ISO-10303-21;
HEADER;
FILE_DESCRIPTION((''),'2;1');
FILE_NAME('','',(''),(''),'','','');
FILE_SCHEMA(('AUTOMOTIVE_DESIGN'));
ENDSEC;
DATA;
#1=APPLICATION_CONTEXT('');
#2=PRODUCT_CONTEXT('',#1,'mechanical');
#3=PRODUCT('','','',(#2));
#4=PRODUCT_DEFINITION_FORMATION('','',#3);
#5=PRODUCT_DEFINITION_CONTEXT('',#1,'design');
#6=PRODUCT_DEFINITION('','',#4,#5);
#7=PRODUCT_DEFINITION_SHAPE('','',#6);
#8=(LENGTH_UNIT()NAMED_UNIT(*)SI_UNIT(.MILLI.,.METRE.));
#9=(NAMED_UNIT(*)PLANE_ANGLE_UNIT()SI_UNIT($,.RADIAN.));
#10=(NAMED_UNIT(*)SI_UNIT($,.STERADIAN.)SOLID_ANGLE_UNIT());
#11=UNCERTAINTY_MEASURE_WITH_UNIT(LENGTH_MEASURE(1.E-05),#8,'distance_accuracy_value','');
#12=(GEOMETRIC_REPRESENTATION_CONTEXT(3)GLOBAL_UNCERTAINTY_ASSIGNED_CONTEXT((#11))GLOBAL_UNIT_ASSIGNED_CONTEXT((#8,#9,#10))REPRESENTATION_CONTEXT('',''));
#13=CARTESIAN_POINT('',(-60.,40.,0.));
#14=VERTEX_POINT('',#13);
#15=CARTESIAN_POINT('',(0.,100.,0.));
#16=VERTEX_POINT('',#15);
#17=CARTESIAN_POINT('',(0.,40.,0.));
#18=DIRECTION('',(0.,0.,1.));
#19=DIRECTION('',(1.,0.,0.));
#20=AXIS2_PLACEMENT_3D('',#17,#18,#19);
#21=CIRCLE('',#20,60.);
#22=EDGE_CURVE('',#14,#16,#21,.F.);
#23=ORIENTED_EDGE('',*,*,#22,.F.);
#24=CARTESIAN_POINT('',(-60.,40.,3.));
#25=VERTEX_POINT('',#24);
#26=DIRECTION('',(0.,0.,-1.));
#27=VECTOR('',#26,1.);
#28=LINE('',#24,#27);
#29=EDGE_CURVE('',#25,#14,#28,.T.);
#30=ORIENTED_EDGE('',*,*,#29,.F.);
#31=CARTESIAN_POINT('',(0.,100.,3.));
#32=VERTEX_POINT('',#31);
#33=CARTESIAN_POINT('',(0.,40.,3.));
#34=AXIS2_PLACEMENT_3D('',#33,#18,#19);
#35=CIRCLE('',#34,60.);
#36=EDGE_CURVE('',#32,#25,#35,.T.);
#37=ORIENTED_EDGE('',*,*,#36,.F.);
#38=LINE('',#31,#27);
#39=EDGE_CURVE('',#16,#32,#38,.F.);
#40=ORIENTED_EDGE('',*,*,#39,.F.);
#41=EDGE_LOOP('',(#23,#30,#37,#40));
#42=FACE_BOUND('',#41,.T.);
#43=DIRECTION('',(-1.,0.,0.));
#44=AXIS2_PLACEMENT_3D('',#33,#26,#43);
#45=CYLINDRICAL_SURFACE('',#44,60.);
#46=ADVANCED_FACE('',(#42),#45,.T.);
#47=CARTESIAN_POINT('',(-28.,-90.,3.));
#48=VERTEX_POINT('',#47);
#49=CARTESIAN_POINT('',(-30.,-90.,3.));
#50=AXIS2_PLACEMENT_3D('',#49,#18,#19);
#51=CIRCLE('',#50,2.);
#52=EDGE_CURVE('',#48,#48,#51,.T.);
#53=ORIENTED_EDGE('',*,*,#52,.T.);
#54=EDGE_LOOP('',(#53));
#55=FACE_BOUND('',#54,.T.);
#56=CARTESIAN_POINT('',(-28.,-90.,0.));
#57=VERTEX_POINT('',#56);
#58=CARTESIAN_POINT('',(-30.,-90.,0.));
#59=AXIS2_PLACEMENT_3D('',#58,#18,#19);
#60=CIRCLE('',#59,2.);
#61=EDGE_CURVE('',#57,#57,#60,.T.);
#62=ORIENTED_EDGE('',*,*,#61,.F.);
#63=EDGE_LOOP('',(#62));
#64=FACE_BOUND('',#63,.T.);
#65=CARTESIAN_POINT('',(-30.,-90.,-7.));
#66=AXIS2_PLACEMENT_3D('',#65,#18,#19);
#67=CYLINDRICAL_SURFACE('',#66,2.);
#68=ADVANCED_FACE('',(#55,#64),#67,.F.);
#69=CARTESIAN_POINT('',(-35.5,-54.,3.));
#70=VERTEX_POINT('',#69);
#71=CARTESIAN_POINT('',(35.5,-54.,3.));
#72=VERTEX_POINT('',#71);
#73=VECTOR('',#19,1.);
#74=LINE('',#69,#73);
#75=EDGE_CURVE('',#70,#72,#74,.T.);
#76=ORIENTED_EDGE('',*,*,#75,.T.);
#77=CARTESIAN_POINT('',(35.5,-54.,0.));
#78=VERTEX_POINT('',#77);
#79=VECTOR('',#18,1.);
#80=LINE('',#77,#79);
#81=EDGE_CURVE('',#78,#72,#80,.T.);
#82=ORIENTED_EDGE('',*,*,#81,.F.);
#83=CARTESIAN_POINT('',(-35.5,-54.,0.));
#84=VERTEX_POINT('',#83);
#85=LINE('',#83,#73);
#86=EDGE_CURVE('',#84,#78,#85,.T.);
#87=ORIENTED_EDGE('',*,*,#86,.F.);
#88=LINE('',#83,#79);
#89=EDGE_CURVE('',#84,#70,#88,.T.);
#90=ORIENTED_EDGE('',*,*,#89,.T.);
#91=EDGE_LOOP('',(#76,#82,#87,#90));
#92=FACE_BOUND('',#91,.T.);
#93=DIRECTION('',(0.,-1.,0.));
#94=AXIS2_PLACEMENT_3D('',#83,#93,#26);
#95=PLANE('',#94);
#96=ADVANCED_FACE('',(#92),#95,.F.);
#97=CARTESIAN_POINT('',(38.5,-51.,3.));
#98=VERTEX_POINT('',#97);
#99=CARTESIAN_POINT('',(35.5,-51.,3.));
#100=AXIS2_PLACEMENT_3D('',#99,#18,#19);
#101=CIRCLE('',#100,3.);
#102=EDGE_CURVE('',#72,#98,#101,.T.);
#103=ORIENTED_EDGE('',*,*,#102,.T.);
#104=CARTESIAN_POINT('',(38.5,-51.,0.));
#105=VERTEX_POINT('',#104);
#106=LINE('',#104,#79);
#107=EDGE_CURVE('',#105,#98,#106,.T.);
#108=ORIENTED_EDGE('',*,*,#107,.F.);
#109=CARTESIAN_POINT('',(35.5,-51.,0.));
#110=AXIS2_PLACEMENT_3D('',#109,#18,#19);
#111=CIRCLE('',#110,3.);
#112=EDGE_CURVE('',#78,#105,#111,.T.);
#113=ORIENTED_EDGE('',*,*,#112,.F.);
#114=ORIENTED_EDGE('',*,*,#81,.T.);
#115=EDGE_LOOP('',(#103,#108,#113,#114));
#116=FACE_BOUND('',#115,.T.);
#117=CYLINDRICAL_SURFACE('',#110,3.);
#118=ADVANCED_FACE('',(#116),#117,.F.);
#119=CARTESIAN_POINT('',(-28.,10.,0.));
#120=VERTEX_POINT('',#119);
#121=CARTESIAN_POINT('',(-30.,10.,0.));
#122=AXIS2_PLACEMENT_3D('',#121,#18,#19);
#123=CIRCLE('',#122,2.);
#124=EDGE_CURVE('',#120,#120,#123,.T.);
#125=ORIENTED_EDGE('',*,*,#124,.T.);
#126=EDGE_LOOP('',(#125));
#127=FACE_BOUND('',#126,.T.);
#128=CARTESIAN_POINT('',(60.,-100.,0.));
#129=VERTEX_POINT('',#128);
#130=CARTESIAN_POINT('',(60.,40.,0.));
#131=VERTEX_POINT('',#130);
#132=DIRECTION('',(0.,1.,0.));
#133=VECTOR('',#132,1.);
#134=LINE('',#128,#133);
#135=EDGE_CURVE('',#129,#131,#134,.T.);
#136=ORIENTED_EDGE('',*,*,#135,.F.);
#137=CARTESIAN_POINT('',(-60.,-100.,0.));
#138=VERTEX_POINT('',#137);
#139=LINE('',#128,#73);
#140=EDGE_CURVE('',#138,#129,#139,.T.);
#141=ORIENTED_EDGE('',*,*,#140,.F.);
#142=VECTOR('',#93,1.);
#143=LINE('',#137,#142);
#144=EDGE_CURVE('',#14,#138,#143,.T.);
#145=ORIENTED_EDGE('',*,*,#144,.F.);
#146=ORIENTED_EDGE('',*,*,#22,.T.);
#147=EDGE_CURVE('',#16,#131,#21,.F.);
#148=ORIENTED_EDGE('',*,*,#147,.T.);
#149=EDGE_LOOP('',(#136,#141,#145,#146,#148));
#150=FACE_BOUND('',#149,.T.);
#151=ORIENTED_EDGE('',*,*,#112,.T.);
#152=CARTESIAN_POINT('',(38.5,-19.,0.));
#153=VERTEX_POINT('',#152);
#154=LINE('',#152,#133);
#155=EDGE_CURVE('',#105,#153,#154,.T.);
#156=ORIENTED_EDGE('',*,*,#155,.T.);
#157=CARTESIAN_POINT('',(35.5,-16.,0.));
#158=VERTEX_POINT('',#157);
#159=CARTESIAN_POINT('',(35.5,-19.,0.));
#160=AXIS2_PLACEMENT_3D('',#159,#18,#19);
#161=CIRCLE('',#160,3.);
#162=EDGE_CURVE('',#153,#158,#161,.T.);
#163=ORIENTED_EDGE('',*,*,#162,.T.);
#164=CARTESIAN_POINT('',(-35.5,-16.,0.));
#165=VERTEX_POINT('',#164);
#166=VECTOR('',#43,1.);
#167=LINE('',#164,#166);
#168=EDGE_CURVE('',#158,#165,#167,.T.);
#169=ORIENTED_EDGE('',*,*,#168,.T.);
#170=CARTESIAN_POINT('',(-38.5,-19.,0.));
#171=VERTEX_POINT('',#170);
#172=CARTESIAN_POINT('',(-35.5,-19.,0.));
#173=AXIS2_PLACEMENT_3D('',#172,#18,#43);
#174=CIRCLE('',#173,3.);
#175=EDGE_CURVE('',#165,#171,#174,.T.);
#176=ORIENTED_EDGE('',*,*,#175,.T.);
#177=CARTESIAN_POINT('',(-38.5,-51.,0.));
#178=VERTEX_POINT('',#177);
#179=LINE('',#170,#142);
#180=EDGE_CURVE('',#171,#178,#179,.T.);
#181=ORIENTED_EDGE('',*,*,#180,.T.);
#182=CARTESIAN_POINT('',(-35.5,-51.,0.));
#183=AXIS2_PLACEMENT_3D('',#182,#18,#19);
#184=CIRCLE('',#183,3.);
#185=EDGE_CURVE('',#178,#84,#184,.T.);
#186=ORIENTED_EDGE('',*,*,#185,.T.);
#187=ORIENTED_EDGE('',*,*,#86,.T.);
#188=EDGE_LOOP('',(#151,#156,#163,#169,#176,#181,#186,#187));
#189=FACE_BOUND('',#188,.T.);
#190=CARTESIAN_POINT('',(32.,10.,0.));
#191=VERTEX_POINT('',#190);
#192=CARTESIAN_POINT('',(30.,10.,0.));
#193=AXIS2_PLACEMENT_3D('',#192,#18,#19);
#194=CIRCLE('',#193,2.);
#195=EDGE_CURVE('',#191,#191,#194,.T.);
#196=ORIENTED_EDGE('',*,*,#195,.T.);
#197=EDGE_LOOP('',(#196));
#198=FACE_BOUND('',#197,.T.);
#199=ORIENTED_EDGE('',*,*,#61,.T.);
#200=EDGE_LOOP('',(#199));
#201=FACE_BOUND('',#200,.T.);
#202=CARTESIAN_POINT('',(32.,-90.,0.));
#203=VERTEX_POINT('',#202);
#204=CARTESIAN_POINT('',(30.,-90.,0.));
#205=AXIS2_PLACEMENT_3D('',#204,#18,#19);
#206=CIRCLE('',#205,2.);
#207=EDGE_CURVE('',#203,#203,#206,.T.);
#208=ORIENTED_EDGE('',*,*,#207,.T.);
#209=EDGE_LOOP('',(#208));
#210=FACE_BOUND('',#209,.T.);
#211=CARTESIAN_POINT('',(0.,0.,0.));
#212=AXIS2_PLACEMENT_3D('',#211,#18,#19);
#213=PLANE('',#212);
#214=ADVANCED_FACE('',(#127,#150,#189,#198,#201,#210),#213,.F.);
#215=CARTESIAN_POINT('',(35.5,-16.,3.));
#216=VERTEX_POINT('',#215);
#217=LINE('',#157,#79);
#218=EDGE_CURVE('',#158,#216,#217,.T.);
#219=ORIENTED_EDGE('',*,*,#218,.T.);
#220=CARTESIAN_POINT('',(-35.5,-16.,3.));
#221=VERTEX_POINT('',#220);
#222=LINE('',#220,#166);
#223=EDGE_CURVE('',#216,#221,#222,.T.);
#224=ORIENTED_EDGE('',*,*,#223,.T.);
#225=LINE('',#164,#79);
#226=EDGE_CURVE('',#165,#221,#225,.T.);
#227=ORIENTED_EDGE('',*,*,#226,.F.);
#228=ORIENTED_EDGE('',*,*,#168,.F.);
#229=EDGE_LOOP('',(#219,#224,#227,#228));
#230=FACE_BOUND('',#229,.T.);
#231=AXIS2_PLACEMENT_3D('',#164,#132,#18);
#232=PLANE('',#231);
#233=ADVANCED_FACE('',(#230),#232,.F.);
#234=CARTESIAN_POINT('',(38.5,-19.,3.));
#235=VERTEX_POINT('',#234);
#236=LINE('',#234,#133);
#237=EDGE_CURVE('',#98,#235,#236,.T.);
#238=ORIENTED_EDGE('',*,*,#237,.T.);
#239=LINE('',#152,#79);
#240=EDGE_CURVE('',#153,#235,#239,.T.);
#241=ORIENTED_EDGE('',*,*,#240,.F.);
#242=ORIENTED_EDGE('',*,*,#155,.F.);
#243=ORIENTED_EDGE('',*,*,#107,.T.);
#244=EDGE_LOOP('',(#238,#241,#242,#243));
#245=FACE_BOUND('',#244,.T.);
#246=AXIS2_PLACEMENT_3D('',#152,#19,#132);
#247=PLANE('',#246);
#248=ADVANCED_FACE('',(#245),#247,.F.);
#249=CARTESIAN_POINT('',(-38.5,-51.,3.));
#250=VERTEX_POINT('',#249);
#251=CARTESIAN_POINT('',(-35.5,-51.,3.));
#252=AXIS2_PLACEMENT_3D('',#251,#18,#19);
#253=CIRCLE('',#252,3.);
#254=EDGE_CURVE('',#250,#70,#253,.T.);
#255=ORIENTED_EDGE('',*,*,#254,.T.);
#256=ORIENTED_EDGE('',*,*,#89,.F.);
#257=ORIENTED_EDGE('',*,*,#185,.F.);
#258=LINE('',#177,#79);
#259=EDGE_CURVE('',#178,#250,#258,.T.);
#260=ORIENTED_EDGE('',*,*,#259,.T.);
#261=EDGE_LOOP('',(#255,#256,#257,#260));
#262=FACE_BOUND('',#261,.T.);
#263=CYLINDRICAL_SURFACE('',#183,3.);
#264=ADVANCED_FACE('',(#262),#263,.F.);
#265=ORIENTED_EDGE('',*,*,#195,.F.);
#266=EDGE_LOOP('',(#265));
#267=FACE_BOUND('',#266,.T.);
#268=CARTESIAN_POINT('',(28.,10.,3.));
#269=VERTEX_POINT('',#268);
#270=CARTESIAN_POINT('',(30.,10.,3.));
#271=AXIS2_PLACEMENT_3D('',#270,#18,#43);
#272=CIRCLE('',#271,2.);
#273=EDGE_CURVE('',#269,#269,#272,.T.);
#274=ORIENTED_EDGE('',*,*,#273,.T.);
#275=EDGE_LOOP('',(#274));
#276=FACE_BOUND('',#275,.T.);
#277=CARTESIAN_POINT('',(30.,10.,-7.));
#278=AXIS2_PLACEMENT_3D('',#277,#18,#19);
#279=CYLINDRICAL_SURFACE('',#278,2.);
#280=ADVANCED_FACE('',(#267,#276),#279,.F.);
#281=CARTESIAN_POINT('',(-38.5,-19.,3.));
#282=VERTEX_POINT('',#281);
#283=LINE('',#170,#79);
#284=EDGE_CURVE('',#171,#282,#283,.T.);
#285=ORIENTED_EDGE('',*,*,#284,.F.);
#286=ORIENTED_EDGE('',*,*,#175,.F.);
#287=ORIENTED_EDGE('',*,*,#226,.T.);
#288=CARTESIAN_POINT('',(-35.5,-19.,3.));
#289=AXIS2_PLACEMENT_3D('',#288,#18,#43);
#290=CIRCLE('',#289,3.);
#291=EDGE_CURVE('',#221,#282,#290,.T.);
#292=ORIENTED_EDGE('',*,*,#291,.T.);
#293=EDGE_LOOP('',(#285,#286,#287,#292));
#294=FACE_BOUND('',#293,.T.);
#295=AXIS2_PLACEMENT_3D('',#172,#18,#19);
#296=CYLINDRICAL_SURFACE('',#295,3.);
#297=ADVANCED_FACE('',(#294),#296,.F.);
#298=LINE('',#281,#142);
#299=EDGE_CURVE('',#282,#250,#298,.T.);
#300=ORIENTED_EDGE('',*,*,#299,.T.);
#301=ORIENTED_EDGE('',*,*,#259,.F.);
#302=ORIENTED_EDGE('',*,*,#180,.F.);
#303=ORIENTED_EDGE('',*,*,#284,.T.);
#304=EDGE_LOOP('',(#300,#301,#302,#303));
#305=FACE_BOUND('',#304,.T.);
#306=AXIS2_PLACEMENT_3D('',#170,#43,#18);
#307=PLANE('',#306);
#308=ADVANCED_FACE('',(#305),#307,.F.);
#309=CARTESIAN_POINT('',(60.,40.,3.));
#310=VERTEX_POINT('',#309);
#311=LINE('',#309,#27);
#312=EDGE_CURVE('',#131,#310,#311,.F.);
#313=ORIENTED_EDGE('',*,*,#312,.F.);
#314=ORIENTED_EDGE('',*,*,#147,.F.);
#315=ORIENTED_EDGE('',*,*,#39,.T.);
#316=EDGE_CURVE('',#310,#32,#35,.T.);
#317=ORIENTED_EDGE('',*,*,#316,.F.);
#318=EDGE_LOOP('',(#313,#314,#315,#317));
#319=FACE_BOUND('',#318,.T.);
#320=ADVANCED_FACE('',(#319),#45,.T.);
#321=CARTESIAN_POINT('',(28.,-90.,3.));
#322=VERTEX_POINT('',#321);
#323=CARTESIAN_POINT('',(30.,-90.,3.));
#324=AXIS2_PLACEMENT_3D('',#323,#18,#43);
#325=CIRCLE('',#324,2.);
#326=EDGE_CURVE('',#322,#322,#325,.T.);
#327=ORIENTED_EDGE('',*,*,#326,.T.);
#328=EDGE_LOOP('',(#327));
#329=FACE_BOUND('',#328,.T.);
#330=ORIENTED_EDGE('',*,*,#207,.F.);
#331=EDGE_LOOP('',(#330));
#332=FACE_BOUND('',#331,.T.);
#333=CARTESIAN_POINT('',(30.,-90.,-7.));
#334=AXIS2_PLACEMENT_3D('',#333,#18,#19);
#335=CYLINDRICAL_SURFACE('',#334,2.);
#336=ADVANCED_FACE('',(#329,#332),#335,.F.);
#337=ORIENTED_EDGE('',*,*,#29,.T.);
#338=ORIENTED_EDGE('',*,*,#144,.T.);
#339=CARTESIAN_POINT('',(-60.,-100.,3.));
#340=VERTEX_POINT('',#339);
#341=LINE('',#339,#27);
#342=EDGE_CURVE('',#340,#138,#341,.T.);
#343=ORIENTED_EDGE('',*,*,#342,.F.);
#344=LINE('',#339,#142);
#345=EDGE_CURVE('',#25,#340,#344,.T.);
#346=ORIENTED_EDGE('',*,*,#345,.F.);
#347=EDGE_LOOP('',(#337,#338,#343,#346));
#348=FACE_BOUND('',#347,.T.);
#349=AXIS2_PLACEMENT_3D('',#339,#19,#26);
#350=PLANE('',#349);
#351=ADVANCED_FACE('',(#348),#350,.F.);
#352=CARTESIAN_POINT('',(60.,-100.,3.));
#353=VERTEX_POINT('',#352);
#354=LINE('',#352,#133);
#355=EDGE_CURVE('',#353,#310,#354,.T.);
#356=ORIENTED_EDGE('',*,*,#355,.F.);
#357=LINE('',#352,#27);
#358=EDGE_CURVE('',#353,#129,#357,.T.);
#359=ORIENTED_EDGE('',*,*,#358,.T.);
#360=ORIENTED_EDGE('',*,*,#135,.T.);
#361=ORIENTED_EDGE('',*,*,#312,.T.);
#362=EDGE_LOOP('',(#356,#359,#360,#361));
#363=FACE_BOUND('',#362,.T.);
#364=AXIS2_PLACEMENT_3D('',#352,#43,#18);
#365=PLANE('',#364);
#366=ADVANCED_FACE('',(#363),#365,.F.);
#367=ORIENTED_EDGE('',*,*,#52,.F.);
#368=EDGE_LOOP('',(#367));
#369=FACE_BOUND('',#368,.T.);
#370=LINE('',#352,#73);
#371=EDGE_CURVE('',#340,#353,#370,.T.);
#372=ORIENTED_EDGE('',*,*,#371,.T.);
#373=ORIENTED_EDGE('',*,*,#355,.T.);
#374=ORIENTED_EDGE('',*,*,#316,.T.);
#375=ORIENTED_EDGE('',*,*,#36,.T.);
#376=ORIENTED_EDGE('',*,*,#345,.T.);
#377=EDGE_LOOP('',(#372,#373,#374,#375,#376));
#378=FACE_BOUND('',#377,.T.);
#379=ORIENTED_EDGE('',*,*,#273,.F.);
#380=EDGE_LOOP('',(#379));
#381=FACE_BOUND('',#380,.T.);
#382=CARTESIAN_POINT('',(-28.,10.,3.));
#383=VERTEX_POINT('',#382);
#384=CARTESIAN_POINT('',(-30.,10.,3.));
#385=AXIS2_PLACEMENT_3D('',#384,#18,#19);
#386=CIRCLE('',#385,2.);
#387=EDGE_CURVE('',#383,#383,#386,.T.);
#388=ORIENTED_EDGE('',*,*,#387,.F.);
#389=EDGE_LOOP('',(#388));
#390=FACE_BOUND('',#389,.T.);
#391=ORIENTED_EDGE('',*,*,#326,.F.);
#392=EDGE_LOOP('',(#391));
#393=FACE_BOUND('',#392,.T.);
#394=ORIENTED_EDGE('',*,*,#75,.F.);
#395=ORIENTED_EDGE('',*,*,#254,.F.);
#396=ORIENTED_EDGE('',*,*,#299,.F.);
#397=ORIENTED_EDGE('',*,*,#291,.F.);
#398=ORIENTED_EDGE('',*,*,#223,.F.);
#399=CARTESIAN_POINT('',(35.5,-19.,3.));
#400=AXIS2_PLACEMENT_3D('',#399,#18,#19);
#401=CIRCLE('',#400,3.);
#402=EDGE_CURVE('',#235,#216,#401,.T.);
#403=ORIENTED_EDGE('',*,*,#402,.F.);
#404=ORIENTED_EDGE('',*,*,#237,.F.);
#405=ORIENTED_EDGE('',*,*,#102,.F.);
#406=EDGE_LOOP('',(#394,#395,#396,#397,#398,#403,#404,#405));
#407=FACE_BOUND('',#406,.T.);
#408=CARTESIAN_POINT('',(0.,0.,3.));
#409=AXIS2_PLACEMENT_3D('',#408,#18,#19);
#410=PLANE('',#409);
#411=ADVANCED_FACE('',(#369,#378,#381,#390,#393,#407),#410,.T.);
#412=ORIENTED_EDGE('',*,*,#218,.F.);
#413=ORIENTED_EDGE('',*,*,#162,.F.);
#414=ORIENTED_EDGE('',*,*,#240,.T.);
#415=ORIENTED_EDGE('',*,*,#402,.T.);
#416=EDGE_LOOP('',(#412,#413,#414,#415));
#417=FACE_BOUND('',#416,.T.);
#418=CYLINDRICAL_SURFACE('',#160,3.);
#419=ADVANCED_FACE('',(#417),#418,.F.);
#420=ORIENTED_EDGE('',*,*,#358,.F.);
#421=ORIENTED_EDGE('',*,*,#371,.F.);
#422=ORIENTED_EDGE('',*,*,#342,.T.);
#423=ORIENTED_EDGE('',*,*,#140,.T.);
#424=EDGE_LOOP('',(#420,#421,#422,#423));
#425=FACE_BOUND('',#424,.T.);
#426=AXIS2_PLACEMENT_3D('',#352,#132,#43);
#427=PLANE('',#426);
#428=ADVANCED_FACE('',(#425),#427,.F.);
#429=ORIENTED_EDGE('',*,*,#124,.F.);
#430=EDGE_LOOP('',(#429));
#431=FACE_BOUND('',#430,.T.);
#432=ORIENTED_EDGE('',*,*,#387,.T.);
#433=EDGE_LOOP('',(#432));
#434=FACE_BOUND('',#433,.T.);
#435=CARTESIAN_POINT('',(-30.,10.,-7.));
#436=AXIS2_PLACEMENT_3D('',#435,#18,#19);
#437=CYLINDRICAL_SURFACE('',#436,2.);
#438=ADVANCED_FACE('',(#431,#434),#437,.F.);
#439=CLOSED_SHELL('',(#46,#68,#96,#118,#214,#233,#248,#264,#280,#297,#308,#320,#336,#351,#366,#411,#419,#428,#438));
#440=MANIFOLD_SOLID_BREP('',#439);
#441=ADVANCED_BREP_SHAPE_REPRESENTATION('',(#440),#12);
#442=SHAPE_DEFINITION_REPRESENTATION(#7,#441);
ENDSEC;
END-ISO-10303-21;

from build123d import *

# Parameters (mm, degrees)
SKETCH1_W           = 120
SKETCH1_H           = 200
BOSS_EXTRUDE1_DEPTH = 3
FILLET1_R           = 60
CUT_EXTRUDE1_DEPTH  = 3
SKETCH3_R           = 2
CUT_EXTRUDE2_DEPTH  = 10


with BuildPart() as part:
    # Sketch1 → Boss-Extrude1 (new body)
    with BuildSketch(Plane.XY):
        Rectangle(SKETCH1_W, SKETCH1_H)
    extrude(amount=BOSS_EXTRUDE1_DEPTH)

    # Fillet1
    fillet1_edges = [part.edges().sort_by_distance(p)[0] for p in [
        (60, 100, 1.5),
        (-60, 100, 1.5),
    ]]
    fillet(fillet1_edges, radius=FILLET1_R - 0.0001)  # a hair under: the kernel refuses the full size

    # Sketch2 → Cut-Extrude1 (cut)
    with BuildSketch(Plane.XY.offset(3)):
        with BuildLine():
            Line((-35.5, -16), (35.5, -16))
            ThreePointArc((35.5, -16), (37.621320344, -16.878679656), (38.5, -19))
            Line((38.5, -19), (38.5, -51))
            ThreePointArc((38.5, -51), (37.621320344, -53.121320344), (35.5, -54))
            Line((35.5, -54), (-35.5, -54))
            ThreePointArc((-35.5, -54), (-37.621320344, -53.121320344), (-38.5, -51))
            Line((-38.5, -51), (-38.5, -19))
            ThreePointArc((-38.5, -19), (-37.621320344, -16.878679656), (-35.5, -16))
        make_face()
    extrude(amount=-CUT_EXTRUDE1_DEPTH, mode=Mode.SUBTRACT)

    # Sketch3 → Cut-Extrude2 (cut)
    with BuildSketch(Plane.XY.offset(3)):
        with Locations((-30, -90)):
            Circle(SKETCH3_R)
        with Locations((-30, 10)):
            Circle(SKETCH3_R)
        with Locations((30, 10)):
            Circle(SKETCH3_R)
        with Locations((30, -90)):
            Circle(SKETCH3_R)
    extrude(amount=-CUT_EXTRUDE2_DEPTH, mode=Mode.SUBTRACT)


solid = part.part
